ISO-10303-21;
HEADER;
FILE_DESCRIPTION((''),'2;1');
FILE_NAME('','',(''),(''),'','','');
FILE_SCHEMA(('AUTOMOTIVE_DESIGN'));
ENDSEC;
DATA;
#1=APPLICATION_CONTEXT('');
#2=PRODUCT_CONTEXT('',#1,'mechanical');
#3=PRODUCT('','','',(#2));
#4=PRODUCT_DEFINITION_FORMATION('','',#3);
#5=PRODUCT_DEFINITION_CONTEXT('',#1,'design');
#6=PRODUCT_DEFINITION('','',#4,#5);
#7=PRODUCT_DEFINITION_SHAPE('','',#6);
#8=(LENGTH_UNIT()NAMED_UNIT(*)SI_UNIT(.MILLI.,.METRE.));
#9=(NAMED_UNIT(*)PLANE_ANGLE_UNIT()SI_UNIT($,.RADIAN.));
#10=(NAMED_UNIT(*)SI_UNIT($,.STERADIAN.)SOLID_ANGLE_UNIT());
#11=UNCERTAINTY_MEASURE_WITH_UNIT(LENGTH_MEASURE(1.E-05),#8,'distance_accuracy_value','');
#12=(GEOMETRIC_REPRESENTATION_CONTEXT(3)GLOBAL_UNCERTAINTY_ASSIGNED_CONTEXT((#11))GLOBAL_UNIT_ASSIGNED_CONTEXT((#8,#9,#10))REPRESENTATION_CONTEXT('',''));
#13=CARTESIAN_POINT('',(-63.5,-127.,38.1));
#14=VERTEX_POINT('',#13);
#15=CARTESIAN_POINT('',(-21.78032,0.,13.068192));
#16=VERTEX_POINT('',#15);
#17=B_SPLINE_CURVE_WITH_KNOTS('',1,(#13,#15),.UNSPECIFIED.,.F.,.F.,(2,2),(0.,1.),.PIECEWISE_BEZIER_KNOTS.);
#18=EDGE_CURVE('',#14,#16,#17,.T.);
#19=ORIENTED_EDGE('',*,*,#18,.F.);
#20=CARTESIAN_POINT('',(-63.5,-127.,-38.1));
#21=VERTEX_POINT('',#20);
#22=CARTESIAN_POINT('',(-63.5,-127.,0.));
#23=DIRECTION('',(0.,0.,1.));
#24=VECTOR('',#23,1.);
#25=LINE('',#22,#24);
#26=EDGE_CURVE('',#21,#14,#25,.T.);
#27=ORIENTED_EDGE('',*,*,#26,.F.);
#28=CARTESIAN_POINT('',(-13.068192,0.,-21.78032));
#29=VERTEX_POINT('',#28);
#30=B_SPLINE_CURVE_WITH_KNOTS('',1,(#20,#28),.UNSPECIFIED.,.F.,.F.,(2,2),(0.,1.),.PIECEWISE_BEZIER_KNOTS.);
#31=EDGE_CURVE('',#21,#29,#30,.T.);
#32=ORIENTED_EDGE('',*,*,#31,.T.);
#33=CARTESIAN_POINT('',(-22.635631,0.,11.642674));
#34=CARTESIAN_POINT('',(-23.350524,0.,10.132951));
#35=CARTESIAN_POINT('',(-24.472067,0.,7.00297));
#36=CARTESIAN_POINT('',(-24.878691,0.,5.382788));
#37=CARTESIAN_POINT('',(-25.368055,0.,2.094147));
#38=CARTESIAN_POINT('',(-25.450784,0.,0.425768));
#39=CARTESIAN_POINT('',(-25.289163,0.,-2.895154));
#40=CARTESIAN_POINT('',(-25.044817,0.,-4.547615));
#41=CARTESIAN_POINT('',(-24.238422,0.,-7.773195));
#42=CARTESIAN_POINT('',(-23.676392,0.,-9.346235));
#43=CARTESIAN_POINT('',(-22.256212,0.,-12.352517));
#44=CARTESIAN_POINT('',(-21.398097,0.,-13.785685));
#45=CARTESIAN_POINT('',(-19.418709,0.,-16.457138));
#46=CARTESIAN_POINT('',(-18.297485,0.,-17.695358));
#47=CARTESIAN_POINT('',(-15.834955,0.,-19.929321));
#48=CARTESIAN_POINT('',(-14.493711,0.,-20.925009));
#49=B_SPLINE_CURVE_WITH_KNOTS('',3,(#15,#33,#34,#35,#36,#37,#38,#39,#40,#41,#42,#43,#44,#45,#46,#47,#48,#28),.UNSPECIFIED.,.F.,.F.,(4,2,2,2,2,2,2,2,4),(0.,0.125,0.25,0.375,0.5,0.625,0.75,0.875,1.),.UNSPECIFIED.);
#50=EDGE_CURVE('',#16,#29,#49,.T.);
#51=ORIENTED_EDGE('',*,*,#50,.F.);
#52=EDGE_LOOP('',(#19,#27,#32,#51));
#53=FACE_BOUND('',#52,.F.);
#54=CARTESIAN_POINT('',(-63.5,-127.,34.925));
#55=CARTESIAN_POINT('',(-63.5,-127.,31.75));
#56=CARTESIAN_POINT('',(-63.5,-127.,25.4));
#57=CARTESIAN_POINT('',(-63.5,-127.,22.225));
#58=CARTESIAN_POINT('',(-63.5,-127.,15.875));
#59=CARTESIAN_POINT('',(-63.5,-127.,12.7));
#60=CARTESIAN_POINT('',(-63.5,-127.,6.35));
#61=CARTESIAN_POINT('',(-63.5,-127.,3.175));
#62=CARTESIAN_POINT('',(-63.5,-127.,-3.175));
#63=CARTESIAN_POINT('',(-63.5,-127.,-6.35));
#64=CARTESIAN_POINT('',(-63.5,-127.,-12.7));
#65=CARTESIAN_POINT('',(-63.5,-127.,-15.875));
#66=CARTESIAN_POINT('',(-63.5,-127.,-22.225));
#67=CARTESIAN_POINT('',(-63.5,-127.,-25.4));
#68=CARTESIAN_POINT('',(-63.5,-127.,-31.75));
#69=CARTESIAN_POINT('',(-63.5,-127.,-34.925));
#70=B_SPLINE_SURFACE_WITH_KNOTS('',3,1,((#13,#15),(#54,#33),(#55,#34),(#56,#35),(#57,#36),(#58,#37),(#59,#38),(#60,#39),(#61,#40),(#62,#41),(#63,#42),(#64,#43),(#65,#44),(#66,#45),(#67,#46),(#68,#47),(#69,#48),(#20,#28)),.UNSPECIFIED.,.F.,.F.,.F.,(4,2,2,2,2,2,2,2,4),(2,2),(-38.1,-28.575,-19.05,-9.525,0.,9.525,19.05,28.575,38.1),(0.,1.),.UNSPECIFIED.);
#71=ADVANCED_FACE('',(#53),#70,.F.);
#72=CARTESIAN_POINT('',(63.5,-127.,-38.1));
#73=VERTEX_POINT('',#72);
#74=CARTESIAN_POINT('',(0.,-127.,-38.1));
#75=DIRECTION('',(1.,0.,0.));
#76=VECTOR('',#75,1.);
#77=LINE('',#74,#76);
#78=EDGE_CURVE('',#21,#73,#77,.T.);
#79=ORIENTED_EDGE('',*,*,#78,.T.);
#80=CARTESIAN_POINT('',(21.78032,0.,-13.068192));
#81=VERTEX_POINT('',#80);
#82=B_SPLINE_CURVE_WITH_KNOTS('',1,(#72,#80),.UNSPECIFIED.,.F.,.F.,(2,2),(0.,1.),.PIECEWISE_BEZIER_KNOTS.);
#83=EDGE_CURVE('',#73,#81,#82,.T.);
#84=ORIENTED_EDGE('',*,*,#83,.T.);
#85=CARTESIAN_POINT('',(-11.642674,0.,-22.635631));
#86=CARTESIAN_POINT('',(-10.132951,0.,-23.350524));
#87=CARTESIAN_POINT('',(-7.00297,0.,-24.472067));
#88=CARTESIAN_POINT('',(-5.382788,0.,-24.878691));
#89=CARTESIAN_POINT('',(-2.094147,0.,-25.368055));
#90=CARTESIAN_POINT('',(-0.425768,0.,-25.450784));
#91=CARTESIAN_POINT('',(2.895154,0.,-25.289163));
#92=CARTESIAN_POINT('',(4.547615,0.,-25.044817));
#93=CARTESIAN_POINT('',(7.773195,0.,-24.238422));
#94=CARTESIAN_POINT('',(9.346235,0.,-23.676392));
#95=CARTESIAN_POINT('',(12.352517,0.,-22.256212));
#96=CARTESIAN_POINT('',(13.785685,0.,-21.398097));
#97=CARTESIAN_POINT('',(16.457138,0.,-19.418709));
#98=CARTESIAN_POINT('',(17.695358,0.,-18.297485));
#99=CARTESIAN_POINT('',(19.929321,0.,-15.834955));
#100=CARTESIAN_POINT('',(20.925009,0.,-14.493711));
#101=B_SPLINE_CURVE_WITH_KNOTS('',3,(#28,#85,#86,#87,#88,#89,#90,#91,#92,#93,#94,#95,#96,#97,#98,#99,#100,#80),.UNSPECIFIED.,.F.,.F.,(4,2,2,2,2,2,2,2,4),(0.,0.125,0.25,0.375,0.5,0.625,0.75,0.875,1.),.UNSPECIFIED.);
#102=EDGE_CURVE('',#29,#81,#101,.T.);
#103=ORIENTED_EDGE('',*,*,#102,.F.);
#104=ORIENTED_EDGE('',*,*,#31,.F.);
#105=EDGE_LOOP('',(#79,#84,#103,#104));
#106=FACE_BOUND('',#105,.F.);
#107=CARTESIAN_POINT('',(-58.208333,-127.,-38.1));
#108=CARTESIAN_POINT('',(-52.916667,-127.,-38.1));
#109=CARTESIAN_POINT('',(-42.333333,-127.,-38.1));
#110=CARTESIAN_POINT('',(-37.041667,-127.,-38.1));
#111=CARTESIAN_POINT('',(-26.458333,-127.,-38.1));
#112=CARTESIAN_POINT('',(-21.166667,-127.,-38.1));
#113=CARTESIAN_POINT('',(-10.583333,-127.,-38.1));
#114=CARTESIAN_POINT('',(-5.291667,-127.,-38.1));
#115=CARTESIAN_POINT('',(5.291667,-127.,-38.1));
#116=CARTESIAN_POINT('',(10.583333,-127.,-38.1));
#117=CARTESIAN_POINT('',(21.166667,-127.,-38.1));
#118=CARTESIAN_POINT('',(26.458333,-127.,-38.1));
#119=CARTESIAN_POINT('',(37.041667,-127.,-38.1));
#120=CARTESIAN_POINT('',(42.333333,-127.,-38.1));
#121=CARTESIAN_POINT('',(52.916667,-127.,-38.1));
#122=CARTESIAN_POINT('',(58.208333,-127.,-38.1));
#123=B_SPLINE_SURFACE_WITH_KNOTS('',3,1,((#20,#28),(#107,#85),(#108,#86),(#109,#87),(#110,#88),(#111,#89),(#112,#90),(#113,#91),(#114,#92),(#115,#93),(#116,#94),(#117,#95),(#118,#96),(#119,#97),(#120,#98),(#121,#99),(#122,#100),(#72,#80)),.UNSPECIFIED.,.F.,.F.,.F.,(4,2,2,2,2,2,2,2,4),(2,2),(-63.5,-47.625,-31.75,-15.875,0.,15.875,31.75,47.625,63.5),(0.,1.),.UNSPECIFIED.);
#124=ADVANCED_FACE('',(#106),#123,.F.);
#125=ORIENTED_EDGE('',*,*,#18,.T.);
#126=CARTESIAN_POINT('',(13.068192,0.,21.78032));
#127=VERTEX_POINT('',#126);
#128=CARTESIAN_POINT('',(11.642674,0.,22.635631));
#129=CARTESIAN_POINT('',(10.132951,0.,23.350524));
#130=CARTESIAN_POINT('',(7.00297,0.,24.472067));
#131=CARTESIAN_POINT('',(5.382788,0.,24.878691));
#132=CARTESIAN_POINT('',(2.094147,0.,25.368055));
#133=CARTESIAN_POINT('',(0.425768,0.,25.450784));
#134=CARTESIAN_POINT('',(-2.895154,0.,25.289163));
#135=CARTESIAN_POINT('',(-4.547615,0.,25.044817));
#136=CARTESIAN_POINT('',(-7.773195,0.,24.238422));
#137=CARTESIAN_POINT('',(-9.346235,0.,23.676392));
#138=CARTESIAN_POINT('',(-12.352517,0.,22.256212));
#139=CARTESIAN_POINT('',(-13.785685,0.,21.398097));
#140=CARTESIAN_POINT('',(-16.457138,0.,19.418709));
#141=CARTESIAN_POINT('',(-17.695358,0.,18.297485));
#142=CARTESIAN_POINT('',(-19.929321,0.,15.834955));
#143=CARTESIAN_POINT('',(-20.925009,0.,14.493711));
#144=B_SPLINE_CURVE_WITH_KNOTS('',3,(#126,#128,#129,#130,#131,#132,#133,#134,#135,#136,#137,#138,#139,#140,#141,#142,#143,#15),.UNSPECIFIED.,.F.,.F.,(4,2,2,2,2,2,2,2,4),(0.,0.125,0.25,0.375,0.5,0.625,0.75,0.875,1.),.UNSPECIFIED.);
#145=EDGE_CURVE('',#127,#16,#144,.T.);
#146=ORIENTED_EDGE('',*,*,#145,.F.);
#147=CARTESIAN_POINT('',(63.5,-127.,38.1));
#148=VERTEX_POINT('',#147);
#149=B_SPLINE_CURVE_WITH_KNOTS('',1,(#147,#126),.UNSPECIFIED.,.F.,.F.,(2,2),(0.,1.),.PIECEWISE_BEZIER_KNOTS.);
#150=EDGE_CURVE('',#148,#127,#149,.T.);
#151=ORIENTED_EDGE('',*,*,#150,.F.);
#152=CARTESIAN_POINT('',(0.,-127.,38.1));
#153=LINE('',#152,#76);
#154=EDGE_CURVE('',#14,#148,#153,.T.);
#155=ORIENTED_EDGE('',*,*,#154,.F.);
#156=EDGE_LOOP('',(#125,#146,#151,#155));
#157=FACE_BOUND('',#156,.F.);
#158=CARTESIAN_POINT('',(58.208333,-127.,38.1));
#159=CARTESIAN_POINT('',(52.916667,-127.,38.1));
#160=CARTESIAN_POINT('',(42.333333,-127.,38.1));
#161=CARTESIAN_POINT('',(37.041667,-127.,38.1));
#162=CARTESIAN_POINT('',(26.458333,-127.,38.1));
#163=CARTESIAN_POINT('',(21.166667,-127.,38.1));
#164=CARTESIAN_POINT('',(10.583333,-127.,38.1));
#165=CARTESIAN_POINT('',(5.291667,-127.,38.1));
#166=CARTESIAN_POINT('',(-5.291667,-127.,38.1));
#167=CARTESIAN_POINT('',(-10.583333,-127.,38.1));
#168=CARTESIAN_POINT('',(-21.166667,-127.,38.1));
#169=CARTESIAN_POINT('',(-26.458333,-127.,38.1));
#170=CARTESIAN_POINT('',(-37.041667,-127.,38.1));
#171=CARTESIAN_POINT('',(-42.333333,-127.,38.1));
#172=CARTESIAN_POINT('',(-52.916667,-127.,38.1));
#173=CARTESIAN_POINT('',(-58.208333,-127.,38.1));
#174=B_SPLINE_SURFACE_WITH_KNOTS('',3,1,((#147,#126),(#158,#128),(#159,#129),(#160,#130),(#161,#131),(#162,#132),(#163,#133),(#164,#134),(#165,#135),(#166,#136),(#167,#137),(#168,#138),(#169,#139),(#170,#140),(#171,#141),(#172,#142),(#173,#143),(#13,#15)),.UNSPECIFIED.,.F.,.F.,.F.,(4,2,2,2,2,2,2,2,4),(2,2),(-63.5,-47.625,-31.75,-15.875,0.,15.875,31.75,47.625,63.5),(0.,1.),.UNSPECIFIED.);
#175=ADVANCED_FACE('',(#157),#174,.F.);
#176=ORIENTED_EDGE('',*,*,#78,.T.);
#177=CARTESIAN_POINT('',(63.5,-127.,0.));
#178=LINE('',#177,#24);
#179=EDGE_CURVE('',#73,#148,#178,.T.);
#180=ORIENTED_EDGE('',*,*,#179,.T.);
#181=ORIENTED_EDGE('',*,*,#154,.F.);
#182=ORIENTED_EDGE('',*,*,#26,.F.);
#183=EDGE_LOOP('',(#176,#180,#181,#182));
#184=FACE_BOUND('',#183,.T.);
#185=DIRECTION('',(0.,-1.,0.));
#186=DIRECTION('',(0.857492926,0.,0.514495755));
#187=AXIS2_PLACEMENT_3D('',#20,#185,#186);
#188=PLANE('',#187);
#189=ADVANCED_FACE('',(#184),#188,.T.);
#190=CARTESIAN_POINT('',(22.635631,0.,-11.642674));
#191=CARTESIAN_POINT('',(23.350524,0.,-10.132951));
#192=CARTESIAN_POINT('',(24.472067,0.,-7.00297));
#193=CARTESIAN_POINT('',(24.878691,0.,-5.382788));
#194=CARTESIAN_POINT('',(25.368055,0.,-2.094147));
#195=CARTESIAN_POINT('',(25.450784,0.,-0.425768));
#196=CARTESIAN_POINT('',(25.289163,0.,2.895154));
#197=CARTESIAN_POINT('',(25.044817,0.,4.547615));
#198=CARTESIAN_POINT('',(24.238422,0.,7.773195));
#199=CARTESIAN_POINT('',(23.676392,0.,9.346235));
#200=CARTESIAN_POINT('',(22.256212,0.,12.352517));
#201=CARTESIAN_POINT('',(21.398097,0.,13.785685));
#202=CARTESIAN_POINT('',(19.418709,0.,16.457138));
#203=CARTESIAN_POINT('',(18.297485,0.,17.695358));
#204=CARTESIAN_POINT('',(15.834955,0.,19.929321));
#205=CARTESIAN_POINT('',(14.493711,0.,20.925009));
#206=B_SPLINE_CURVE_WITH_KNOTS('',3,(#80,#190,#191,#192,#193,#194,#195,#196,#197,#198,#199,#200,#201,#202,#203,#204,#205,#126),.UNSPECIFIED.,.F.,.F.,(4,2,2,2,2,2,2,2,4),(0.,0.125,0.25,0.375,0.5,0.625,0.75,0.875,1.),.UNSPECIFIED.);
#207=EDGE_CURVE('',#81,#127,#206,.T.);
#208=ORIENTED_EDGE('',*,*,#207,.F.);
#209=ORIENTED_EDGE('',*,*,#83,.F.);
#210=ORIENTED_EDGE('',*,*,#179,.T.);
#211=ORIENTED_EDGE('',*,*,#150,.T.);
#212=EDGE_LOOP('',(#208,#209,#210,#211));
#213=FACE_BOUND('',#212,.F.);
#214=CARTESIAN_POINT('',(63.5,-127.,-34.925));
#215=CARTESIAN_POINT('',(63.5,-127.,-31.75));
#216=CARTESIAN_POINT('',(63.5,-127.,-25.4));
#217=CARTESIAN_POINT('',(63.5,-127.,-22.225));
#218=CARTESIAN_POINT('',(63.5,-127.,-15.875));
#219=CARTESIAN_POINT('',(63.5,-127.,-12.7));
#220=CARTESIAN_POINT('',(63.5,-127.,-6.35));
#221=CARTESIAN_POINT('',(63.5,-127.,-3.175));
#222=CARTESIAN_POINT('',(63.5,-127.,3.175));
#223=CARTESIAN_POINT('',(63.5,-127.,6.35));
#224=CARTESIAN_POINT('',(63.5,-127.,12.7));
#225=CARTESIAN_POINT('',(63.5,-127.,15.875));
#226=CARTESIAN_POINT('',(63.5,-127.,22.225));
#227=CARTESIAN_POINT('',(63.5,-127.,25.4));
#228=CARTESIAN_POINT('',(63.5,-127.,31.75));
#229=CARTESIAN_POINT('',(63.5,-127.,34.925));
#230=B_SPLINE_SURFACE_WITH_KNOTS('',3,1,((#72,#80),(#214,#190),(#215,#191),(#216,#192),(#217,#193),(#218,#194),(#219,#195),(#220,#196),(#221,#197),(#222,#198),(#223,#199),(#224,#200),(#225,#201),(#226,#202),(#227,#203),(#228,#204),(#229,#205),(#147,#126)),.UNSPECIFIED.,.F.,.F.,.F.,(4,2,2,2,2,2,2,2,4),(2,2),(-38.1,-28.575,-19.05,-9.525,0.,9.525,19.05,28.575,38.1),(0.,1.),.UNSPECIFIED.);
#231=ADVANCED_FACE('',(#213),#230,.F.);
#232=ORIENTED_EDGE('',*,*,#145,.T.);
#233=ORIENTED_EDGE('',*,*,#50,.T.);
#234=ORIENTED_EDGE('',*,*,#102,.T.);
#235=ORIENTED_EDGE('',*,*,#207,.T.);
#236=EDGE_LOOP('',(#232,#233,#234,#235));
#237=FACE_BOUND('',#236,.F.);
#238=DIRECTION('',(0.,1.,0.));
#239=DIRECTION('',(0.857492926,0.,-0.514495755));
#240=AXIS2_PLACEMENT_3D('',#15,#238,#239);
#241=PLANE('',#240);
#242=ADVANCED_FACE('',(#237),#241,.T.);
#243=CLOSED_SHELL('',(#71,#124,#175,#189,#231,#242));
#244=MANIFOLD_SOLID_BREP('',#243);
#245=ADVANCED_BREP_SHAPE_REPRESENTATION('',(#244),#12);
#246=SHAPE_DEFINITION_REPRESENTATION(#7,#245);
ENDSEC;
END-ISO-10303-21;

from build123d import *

# Parameters (mm, degrees)
F2_W = 127
F2_H = 76.2


# Not quite as in the source:
# - the arcs of a loft's sections are written as splines that run evenly, so that the points pair up as in the source's solid


with BuildPart() as f3:
    # F2 (on offset) → F3 section 0
    with BuildSketch(Plane.XZ.offset(127)):
        Rectangle(F2_W, F2_H)
    # F0 (on Front) → F3 section 1
    with BuildSketch(Plane.XZ):
        with BuildLine():
            add(Edge.make_bspline(
                [(-21.7803203131, 13.0681921879), (-22.6356314917, 11.6426735568), (-23.3505236623, 10.1329514593), (-24.472067113, 7.0029702123), (-24.8786906608, 5.3827884578), (-25.3680549193, 2.0941466499), (-25.4507835294, 0.4257679146), (-25.2891626016, -2.8951537939), (-25.04481706, -4.5476146508), (-24.2384219474, -7.773195101), (-23.6763923162, -9.3462349355), (-22.2562123309, -12.3525168797), (-21.3980970935, -13.7856846531), (-19.4187089559, -16.457138362), (-18.2974849998, -17.6953582406), (-15.8349554859, -19.9293212464), (-14.4937108189, -20.9250091345), (-13.0681921879, -21.7803203131)],
                knots=[0, 0, 0, 0, 0.125, 0.125, 0.25, 0.25, 0.375, 0.375, 0.5, 0.5, 0.625, 0.625, 0.75, 0.75, 0.875, 0.875, 1, 1, 1, 1], degree=3))
            add(Edge.make_bspline(
                [(-13.0681921879, -21.7803203131), (-11.6426735568, -22.6356314917), (-10.1329514593, -23.3505236623), (-7.0029702123, -24.472067113), (-5.3827884578, -24.8786906608), (-2.0941466499, -25.3680549193), (-0.4257679146, -25.4507835294), (2.8951537939, -25.2891626016), (4.5476146508, -25.04481706), (7.773195101, -24.2384219474), (9.3462349355, -23.6763923162), (12.3525168797, -22.2562123309), (13.7856846531, -21.3980970935), (16.457138362, -19.4187089559), (17.6953582406, -18.2974849998), (19.9293212464, -15.8349554859), (20.9250091345, -14.4937108189), (21.7803203131, -13.0681921879)],
                knots=[0, 0, 0, 0, 0.125, 0.125, 0.25, 0.25, 0.375, 0.375, 0.5, 0.5, 0.625, 0.625, 0.75, 0.75, 0.875, 0.875, 1, 1, 1, 1], degree=3))
            add(Edge.make_bspline(
                [(21.7803203131, -13.0681921879), (22.6356314917, -11.6426735568), (23.3505236623, -10.1329514593), (24.472067113, -7.0029702123), (24.8786906608, -5.3827884578), (25.3680549193, -2.0941466499), (25.4507835294, -0.4257679146), (25.2891626016, 2.8951537939), (25.04481706, 4.5476146508), (24.2384219474, 7.773195101), (23.6763923162, 9.3462349355), (22.2562123309, 12.3525168797), (21.3980970935, 13.7856846531), (19.4187089559, 16.457138362), (18.2974849998, 17.6953582406), (15.8349554859, 19.9293212464), (14.4937108189, 20.9250091345), (13.0681921879, 21.7803203131)],
                knots=[0, 0, 0, 0, 0.125, 0.125, 0.25, 0.25, 0.375, 0.375, 0.5, 0.5, 0.625, 0.625, 0.75, 0.75, 0.875, 0.875, 1, 1, 1, 1], degree=3))
            add(Edge.make_bspline(
                [(13.0681921879, 21.7803203131), (11.6426735568, 22.6356314917), (10.1329514593, 23.3505236623), (7.0029702123, 24.472067113), (5.3827884578, 24.8786906608), (2.0941466499, 25.3680549193), (0.4257679146, 25.4507835294), (-2.8951537939, 25.2891626016), (-4.5476146508, 25.04481706), (-7.773195101, 24.2384219474), (-9.3462349355, 23.6763923162), (-12.3525168797, 22.2562123309), (-13.7856846531, 21.3980970935), (-16.457138362, 19.4187089559), (-17.6953582406, 18.2974849998), (-19.9293212464, 15.8349554859), (-20.9250091345, 14.4937108189), (-21.7803203131, 13.0681921879)],
                knots=[0, 0, 0, 0, 0.125, 0.125, 0.25, 0.25, 0.375, 0.375, 0.5, 0.5, 0.625, 0.625, 0.75, 0.75, 0.875, 0.875, 1, 1, 1, 1], degree=3))
        make_face()
    loft(ruled=True)


solid = f3.part
